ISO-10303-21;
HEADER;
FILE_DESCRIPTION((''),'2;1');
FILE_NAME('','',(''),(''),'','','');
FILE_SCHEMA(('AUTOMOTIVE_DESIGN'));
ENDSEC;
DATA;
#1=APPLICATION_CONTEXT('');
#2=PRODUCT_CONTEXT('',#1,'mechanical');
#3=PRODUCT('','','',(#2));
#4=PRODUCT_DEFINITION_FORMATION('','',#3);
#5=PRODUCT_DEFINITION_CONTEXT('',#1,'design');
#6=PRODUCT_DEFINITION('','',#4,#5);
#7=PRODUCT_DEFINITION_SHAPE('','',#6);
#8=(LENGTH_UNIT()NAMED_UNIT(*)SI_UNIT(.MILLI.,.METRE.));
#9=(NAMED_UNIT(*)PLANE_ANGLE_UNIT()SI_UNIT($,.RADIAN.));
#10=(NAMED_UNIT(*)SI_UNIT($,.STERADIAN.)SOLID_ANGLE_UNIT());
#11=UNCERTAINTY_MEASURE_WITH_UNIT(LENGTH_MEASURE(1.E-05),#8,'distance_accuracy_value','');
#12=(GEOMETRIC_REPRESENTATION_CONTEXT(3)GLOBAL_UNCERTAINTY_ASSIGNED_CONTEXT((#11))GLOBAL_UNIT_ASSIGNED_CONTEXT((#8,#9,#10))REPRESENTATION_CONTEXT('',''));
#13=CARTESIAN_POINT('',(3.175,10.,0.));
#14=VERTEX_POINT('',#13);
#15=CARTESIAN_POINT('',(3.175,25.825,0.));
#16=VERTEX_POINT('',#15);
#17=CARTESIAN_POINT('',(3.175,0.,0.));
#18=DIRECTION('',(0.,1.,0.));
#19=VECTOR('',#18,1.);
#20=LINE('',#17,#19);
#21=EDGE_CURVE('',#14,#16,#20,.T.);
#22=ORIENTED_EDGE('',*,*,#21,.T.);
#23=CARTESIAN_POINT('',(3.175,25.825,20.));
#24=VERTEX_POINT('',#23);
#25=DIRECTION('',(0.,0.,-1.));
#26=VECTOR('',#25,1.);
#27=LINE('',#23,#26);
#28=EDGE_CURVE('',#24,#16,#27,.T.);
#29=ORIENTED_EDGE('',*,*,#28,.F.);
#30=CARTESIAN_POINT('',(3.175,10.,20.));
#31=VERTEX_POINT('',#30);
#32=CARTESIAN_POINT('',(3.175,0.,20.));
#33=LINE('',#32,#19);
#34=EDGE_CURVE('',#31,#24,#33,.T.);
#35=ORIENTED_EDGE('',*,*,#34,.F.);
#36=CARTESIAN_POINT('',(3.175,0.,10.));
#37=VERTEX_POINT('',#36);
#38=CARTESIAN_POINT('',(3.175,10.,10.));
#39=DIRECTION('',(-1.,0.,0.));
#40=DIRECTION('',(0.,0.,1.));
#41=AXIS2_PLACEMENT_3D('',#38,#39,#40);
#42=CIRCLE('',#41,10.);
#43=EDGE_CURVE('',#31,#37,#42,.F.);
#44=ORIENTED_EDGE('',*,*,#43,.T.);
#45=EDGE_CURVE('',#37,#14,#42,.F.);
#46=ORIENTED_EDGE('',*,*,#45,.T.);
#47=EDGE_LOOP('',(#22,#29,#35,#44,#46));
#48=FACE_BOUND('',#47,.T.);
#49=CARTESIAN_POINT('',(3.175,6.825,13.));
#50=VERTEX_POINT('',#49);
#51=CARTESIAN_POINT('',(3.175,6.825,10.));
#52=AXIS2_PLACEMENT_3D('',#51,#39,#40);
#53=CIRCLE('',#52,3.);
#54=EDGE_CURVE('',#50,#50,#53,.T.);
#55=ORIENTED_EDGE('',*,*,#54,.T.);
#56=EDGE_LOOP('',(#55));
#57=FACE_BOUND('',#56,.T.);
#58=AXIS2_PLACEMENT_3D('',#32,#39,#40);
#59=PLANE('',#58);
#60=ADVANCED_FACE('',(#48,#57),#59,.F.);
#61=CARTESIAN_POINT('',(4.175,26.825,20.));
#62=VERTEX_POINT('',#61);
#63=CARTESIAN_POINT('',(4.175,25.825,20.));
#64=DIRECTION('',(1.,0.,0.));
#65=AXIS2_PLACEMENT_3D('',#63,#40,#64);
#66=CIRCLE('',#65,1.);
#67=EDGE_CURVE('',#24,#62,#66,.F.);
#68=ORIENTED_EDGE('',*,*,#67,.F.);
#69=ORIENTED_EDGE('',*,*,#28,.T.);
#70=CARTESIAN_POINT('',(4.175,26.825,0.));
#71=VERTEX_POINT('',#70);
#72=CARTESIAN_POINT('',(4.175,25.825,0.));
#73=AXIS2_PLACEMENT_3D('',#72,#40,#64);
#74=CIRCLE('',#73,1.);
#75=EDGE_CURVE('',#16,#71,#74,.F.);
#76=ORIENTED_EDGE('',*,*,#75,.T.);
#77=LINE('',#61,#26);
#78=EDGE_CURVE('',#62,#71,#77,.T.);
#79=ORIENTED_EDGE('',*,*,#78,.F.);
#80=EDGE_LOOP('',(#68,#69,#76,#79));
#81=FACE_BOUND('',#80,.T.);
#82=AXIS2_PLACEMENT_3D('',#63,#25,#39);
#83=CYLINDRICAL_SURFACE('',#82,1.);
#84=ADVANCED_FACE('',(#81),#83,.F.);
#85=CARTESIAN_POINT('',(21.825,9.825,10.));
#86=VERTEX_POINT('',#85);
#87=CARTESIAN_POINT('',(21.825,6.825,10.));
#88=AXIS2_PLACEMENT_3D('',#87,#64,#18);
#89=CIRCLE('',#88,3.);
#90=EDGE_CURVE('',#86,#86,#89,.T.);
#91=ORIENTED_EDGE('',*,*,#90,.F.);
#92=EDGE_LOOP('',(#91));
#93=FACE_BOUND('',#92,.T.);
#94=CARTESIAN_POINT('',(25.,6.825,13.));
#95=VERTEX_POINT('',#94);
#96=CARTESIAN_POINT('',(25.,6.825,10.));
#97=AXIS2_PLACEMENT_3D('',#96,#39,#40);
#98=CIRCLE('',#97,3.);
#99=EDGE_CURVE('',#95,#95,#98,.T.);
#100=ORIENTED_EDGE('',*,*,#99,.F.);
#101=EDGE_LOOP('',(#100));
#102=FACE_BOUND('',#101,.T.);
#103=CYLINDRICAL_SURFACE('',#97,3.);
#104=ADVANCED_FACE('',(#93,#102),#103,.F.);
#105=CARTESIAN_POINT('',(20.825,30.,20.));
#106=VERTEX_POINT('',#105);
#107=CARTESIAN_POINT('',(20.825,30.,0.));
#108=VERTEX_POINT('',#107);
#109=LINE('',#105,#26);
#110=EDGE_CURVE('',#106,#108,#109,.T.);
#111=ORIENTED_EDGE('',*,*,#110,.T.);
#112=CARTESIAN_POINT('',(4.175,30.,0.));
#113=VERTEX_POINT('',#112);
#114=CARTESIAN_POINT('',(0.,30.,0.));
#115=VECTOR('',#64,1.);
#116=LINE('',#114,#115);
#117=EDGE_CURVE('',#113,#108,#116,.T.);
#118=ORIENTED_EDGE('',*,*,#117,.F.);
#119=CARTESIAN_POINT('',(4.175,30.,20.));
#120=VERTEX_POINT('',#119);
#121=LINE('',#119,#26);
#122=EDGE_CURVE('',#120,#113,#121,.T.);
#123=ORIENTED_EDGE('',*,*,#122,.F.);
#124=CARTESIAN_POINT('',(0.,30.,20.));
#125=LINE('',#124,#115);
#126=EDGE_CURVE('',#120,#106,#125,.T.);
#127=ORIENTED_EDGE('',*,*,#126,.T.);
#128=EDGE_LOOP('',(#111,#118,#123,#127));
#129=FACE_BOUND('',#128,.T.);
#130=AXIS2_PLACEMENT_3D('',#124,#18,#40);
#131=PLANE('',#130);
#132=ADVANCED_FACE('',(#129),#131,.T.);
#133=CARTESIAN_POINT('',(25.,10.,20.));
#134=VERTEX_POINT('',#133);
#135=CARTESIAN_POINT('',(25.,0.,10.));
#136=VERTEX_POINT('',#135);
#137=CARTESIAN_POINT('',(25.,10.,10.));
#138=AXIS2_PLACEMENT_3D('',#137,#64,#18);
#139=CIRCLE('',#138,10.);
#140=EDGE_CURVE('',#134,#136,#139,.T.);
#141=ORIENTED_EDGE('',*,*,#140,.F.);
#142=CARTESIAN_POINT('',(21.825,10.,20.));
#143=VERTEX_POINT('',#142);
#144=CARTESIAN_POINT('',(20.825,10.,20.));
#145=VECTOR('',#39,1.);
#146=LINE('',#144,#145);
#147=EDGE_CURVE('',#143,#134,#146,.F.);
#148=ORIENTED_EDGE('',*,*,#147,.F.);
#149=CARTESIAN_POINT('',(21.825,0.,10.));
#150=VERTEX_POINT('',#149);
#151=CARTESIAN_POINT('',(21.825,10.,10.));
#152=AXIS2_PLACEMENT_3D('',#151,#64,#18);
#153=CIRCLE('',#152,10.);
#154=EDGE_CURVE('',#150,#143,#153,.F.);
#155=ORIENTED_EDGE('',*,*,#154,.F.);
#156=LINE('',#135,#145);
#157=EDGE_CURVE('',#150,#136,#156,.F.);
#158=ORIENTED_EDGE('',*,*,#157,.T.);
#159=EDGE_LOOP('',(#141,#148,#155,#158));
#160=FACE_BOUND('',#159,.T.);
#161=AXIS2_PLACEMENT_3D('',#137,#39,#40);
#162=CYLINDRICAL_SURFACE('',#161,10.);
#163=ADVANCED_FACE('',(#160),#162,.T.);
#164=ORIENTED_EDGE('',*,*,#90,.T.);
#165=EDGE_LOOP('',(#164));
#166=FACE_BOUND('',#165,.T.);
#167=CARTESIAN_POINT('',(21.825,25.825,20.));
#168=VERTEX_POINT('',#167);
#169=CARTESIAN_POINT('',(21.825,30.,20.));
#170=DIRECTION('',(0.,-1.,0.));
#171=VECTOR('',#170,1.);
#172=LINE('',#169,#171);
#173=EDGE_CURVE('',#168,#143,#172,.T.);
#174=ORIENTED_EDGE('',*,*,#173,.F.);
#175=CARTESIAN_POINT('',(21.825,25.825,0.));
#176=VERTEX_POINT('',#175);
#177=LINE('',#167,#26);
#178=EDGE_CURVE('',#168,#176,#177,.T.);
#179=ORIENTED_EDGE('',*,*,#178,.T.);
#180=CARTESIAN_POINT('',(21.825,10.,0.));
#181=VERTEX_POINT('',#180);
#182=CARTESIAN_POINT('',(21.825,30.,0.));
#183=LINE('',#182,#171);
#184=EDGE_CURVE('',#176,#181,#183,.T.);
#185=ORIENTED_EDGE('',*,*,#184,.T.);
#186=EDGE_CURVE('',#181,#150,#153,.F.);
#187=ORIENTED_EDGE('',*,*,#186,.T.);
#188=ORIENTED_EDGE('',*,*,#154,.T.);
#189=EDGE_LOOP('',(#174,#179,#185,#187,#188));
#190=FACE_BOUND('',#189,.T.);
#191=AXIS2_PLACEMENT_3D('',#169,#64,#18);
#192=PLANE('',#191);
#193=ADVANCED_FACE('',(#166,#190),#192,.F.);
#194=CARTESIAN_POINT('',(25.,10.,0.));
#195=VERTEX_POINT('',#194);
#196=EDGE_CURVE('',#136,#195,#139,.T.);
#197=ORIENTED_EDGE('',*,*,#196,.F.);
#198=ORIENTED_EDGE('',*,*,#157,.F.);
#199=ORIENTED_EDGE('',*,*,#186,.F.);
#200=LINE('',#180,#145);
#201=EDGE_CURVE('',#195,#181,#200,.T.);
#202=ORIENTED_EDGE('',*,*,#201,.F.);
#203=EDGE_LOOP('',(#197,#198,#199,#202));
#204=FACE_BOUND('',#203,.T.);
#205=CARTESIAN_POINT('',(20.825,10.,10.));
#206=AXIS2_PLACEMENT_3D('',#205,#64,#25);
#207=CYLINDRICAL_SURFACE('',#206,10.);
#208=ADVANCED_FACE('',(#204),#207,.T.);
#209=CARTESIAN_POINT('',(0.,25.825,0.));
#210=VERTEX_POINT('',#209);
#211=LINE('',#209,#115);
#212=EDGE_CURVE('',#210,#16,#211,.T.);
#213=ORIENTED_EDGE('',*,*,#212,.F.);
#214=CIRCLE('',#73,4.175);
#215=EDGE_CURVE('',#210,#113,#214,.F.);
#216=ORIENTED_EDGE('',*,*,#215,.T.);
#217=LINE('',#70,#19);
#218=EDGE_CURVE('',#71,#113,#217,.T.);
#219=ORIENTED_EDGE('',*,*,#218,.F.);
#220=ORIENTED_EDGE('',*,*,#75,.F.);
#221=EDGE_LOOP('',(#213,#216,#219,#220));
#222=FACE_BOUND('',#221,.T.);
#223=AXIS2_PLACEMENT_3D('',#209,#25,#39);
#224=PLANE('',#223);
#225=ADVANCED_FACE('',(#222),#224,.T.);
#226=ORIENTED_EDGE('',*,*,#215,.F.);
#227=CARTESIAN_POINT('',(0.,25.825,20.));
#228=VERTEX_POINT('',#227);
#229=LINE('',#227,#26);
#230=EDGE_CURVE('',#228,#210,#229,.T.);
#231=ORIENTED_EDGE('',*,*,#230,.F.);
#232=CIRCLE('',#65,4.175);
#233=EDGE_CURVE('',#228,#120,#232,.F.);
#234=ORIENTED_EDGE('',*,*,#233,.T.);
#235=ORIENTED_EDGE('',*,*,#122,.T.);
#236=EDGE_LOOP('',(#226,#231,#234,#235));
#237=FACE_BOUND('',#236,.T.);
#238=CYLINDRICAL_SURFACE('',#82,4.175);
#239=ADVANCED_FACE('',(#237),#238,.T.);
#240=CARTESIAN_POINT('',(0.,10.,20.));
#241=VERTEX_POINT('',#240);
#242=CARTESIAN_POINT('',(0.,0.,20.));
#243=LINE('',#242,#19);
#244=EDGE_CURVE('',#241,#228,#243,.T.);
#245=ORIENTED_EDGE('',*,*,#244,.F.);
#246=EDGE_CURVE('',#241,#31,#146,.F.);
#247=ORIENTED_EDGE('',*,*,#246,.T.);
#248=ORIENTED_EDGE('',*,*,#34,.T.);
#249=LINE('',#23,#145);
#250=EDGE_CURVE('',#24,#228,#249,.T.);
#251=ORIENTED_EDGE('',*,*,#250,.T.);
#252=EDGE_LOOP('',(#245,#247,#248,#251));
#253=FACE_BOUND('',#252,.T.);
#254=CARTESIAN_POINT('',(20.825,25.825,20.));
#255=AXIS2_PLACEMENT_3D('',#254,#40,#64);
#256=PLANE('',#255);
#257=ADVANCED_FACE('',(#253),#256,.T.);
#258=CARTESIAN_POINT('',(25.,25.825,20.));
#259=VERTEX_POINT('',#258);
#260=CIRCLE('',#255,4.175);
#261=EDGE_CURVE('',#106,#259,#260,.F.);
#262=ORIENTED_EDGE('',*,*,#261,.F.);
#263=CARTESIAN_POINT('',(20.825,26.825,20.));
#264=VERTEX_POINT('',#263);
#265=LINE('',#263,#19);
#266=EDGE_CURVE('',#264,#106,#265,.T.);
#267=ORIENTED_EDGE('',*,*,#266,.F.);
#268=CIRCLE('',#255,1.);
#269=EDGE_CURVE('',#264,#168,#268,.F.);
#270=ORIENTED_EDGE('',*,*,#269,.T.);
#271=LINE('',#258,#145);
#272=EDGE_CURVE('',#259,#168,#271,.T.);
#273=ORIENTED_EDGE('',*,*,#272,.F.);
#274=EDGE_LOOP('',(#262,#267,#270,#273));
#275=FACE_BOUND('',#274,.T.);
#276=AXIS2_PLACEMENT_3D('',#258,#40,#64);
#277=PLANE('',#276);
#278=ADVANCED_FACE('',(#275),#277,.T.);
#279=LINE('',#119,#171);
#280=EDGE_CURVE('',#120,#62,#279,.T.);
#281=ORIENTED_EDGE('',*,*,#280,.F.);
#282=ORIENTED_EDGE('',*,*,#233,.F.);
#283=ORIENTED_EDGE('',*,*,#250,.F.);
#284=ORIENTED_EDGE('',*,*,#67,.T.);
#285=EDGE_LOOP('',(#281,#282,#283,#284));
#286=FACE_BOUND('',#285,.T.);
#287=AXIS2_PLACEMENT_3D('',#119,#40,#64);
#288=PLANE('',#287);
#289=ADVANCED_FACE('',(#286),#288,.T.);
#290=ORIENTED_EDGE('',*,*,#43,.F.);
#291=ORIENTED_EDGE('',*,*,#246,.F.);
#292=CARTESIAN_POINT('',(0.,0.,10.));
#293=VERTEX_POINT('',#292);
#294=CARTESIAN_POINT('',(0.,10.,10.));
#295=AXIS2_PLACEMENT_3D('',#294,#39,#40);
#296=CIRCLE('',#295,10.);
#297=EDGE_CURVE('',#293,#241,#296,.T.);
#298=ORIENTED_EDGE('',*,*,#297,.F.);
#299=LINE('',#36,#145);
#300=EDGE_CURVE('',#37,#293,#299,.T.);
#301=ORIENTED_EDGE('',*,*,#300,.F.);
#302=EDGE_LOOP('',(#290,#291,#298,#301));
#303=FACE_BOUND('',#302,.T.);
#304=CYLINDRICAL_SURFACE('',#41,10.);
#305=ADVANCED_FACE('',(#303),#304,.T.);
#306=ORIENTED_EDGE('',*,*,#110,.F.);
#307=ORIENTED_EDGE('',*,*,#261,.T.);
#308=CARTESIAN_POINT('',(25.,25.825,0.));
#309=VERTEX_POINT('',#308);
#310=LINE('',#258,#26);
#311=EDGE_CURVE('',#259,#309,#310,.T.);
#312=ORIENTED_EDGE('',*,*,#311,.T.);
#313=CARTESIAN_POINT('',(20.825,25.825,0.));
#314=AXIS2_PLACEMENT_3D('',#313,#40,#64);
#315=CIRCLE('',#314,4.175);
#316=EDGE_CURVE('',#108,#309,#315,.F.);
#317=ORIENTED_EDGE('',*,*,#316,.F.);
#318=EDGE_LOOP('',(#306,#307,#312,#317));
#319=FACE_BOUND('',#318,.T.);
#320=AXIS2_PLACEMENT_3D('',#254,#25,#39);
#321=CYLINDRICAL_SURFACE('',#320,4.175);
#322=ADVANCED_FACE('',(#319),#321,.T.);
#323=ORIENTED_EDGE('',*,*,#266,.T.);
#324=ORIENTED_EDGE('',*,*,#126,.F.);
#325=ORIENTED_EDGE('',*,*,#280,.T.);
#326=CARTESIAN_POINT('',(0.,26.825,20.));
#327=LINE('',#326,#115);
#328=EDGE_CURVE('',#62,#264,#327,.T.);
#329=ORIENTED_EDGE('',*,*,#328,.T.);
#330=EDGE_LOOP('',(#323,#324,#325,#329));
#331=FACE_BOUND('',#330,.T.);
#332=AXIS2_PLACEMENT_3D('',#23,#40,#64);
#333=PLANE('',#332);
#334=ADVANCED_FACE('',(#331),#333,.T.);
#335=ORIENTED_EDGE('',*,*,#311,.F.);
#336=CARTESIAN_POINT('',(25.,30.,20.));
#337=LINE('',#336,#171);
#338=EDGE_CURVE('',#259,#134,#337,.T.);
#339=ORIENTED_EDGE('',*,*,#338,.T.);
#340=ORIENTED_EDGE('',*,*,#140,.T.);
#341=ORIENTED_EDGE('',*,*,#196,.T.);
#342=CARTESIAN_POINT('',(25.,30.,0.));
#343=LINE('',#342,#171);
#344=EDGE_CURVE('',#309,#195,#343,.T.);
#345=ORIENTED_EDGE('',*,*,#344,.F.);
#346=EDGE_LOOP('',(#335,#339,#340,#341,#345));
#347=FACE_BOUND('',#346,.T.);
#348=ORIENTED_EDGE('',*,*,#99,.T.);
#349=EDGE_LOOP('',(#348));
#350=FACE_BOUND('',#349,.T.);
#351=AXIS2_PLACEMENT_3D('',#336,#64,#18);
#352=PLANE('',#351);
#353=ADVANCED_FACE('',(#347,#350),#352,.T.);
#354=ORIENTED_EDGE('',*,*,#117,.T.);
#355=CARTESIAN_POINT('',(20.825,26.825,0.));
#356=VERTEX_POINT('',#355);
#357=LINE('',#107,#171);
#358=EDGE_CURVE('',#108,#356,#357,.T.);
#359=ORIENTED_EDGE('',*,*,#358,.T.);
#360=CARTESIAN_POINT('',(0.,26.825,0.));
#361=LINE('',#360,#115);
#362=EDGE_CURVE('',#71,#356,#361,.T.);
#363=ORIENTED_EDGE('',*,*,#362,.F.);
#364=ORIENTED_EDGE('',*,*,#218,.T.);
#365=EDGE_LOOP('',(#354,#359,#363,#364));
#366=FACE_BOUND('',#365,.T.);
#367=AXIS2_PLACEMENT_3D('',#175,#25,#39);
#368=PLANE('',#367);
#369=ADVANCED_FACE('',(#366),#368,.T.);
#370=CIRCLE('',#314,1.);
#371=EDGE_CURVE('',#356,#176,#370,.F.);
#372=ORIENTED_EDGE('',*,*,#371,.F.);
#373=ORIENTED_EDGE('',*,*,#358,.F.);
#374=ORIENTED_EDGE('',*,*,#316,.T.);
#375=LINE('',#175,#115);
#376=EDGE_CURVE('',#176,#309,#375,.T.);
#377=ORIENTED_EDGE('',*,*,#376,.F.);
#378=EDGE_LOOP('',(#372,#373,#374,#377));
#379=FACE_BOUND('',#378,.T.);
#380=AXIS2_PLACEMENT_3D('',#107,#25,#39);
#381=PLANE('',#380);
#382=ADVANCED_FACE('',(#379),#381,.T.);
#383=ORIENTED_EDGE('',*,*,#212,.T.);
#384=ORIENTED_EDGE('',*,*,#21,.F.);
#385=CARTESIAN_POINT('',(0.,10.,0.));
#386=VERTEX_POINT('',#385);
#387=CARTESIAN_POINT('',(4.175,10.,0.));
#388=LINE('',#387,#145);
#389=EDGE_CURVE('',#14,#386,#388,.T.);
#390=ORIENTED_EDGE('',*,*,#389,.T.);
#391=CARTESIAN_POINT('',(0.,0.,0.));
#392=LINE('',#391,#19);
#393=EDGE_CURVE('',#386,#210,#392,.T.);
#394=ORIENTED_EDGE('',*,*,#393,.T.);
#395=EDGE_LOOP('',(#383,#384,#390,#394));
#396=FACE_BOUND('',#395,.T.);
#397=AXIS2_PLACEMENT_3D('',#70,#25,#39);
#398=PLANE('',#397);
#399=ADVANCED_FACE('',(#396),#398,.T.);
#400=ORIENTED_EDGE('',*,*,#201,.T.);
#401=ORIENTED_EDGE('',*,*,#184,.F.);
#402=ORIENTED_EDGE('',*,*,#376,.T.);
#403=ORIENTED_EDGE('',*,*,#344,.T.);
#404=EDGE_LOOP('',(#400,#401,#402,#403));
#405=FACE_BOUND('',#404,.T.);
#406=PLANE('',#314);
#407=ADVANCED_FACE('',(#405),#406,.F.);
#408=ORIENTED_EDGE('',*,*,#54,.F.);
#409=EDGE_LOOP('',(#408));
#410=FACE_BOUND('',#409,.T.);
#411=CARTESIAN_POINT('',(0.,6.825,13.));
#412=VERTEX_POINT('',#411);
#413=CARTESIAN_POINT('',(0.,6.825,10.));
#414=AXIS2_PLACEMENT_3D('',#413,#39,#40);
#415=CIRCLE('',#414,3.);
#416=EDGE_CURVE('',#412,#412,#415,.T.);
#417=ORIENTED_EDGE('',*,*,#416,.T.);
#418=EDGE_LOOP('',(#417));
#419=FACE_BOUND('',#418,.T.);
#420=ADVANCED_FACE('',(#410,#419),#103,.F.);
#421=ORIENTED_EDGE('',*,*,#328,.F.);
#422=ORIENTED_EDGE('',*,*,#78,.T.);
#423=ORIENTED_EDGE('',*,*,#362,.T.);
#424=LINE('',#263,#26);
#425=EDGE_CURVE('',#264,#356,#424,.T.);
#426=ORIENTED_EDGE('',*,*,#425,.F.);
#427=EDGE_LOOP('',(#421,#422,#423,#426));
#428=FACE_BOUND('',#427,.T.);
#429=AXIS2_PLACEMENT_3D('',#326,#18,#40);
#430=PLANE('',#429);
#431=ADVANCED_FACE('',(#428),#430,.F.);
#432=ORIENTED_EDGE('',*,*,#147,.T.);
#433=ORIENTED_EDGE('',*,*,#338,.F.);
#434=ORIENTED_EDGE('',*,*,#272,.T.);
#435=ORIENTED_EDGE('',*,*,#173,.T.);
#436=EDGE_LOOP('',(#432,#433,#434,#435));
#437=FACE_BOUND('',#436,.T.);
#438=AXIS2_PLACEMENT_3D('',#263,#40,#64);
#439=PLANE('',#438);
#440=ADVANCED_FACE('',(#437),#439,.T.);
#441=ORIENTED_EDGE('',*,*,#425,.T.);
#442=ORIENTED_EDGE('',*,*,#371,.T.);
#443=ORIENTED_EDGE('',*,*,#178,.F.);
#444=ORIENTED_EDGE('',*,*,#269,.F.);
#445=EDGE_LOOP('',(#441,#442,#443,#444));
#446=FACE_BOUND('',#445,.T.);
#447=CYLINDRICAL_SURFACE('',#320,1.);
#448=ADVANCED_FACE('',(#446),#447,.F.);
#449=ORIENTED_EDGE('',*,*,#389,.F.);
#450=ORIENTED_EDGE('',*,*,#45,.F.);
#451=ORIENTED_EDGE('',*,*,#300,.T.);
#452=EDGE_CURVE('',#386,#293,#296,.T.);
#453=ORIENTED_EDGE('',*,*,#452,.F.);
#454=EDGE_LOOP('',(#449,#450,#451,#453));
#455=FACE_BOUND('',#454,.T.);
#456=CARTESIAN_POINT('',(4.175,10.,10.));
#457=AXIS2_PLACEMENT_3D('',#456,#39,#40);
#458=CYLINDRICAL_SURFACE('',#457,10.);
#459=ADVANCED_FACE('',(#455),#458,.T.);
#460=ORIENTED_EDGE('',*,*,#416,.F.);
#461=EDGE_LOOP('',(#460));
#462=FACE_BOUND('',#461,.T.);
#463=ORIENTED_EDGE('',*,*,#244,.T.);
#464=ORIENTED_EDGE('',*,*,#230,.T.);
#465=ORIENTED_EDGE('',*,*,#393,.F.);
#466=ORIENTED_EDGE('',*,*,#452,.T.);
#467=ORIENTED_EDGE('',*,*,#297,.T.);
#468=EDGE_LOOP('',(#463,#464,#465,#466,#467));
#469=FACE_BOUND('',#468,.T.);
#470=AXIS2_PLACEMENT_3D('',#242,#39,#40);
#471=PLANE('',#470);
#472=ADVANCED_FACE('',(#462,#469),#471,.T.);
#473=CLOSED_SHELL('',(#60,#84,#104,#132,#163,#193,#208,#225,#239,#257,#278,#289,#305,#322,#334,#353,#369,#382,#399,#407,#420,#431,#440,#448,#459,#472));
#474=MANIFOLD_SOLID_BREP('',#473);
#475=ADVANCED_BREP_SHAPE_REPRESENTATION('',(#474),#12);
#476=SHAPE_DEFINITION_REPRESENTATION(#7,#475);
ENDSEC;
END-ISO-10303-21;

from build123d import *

# Parameters (mm, degrees)
BASE_FLANGE1_DEPTH = 20
SKETCH6_R          = 3
CUT_EXTRUDE1_DEPTH = 44.874821937
FILLET1_R          = 10


# Read off the part's stored shape, not the designer's step: Base-Flange1
with BuildPart() as part:
    # Base-Flange1 outline → Base-Flange1 (new body)
    with BuildSketch(Plane.XY):
        with BuildLine():
            Line((21.825, 25.825), (21.825, 0))
            Line((21.825, 0), (25, 0))
            Line((25, 0), (25, 25.825))
            ThreePointArc((25, 25.825), (23.777170811, 28.777170811), (20.825, 30))
            Line((20.825, 30), (4.175, 30))
            ThreePointArc((4.175, 30), (1.222829189, 28.777170811), (0, 25.825))
            Line((0, 25.825), (0, 0))
            Line((0, 0), (3.175, 0))
            Line((3.175, 0), (3.175, 25.825))
            ThreePointArc((3.175, 25.825), (3.467893219, 26.532106781), (4.175, 26.825))
            Line((4.175, 26.825), (20.825, 26.825))
            ThreePointArc((20.825, 26.825), (21.532106781, 26.532106781), (21.825, 25.825))
        make_face()
    extrude(amount=BASE_FLANGE1_DEPTH)

    # Sketch6 → Cut-Extrude1 (cut, through all)
    with BuildSketch(Plane.ZY):
        with Locations((10, 6.825)):
            Circle(SKETCH6_R)
    extrude(amount=-CUT_EXTRUDE1_DEPTH, mode=Mode.SUBTRACT)

    # Fillet1
    fillet1_edges = [part.edges().sort_by_distance(p)[0] for p in [
        (23.4125, 0, 20),
        (23.4125, 0, 0),
        (1.5875, 0, 0),
        (1.5875, 0, 20),
    ]]
    fillet(fillet1_edges, radius=FILLET1_R - 0.0001)  # a hair under: the kernel refuses the full size


solid = part.part
